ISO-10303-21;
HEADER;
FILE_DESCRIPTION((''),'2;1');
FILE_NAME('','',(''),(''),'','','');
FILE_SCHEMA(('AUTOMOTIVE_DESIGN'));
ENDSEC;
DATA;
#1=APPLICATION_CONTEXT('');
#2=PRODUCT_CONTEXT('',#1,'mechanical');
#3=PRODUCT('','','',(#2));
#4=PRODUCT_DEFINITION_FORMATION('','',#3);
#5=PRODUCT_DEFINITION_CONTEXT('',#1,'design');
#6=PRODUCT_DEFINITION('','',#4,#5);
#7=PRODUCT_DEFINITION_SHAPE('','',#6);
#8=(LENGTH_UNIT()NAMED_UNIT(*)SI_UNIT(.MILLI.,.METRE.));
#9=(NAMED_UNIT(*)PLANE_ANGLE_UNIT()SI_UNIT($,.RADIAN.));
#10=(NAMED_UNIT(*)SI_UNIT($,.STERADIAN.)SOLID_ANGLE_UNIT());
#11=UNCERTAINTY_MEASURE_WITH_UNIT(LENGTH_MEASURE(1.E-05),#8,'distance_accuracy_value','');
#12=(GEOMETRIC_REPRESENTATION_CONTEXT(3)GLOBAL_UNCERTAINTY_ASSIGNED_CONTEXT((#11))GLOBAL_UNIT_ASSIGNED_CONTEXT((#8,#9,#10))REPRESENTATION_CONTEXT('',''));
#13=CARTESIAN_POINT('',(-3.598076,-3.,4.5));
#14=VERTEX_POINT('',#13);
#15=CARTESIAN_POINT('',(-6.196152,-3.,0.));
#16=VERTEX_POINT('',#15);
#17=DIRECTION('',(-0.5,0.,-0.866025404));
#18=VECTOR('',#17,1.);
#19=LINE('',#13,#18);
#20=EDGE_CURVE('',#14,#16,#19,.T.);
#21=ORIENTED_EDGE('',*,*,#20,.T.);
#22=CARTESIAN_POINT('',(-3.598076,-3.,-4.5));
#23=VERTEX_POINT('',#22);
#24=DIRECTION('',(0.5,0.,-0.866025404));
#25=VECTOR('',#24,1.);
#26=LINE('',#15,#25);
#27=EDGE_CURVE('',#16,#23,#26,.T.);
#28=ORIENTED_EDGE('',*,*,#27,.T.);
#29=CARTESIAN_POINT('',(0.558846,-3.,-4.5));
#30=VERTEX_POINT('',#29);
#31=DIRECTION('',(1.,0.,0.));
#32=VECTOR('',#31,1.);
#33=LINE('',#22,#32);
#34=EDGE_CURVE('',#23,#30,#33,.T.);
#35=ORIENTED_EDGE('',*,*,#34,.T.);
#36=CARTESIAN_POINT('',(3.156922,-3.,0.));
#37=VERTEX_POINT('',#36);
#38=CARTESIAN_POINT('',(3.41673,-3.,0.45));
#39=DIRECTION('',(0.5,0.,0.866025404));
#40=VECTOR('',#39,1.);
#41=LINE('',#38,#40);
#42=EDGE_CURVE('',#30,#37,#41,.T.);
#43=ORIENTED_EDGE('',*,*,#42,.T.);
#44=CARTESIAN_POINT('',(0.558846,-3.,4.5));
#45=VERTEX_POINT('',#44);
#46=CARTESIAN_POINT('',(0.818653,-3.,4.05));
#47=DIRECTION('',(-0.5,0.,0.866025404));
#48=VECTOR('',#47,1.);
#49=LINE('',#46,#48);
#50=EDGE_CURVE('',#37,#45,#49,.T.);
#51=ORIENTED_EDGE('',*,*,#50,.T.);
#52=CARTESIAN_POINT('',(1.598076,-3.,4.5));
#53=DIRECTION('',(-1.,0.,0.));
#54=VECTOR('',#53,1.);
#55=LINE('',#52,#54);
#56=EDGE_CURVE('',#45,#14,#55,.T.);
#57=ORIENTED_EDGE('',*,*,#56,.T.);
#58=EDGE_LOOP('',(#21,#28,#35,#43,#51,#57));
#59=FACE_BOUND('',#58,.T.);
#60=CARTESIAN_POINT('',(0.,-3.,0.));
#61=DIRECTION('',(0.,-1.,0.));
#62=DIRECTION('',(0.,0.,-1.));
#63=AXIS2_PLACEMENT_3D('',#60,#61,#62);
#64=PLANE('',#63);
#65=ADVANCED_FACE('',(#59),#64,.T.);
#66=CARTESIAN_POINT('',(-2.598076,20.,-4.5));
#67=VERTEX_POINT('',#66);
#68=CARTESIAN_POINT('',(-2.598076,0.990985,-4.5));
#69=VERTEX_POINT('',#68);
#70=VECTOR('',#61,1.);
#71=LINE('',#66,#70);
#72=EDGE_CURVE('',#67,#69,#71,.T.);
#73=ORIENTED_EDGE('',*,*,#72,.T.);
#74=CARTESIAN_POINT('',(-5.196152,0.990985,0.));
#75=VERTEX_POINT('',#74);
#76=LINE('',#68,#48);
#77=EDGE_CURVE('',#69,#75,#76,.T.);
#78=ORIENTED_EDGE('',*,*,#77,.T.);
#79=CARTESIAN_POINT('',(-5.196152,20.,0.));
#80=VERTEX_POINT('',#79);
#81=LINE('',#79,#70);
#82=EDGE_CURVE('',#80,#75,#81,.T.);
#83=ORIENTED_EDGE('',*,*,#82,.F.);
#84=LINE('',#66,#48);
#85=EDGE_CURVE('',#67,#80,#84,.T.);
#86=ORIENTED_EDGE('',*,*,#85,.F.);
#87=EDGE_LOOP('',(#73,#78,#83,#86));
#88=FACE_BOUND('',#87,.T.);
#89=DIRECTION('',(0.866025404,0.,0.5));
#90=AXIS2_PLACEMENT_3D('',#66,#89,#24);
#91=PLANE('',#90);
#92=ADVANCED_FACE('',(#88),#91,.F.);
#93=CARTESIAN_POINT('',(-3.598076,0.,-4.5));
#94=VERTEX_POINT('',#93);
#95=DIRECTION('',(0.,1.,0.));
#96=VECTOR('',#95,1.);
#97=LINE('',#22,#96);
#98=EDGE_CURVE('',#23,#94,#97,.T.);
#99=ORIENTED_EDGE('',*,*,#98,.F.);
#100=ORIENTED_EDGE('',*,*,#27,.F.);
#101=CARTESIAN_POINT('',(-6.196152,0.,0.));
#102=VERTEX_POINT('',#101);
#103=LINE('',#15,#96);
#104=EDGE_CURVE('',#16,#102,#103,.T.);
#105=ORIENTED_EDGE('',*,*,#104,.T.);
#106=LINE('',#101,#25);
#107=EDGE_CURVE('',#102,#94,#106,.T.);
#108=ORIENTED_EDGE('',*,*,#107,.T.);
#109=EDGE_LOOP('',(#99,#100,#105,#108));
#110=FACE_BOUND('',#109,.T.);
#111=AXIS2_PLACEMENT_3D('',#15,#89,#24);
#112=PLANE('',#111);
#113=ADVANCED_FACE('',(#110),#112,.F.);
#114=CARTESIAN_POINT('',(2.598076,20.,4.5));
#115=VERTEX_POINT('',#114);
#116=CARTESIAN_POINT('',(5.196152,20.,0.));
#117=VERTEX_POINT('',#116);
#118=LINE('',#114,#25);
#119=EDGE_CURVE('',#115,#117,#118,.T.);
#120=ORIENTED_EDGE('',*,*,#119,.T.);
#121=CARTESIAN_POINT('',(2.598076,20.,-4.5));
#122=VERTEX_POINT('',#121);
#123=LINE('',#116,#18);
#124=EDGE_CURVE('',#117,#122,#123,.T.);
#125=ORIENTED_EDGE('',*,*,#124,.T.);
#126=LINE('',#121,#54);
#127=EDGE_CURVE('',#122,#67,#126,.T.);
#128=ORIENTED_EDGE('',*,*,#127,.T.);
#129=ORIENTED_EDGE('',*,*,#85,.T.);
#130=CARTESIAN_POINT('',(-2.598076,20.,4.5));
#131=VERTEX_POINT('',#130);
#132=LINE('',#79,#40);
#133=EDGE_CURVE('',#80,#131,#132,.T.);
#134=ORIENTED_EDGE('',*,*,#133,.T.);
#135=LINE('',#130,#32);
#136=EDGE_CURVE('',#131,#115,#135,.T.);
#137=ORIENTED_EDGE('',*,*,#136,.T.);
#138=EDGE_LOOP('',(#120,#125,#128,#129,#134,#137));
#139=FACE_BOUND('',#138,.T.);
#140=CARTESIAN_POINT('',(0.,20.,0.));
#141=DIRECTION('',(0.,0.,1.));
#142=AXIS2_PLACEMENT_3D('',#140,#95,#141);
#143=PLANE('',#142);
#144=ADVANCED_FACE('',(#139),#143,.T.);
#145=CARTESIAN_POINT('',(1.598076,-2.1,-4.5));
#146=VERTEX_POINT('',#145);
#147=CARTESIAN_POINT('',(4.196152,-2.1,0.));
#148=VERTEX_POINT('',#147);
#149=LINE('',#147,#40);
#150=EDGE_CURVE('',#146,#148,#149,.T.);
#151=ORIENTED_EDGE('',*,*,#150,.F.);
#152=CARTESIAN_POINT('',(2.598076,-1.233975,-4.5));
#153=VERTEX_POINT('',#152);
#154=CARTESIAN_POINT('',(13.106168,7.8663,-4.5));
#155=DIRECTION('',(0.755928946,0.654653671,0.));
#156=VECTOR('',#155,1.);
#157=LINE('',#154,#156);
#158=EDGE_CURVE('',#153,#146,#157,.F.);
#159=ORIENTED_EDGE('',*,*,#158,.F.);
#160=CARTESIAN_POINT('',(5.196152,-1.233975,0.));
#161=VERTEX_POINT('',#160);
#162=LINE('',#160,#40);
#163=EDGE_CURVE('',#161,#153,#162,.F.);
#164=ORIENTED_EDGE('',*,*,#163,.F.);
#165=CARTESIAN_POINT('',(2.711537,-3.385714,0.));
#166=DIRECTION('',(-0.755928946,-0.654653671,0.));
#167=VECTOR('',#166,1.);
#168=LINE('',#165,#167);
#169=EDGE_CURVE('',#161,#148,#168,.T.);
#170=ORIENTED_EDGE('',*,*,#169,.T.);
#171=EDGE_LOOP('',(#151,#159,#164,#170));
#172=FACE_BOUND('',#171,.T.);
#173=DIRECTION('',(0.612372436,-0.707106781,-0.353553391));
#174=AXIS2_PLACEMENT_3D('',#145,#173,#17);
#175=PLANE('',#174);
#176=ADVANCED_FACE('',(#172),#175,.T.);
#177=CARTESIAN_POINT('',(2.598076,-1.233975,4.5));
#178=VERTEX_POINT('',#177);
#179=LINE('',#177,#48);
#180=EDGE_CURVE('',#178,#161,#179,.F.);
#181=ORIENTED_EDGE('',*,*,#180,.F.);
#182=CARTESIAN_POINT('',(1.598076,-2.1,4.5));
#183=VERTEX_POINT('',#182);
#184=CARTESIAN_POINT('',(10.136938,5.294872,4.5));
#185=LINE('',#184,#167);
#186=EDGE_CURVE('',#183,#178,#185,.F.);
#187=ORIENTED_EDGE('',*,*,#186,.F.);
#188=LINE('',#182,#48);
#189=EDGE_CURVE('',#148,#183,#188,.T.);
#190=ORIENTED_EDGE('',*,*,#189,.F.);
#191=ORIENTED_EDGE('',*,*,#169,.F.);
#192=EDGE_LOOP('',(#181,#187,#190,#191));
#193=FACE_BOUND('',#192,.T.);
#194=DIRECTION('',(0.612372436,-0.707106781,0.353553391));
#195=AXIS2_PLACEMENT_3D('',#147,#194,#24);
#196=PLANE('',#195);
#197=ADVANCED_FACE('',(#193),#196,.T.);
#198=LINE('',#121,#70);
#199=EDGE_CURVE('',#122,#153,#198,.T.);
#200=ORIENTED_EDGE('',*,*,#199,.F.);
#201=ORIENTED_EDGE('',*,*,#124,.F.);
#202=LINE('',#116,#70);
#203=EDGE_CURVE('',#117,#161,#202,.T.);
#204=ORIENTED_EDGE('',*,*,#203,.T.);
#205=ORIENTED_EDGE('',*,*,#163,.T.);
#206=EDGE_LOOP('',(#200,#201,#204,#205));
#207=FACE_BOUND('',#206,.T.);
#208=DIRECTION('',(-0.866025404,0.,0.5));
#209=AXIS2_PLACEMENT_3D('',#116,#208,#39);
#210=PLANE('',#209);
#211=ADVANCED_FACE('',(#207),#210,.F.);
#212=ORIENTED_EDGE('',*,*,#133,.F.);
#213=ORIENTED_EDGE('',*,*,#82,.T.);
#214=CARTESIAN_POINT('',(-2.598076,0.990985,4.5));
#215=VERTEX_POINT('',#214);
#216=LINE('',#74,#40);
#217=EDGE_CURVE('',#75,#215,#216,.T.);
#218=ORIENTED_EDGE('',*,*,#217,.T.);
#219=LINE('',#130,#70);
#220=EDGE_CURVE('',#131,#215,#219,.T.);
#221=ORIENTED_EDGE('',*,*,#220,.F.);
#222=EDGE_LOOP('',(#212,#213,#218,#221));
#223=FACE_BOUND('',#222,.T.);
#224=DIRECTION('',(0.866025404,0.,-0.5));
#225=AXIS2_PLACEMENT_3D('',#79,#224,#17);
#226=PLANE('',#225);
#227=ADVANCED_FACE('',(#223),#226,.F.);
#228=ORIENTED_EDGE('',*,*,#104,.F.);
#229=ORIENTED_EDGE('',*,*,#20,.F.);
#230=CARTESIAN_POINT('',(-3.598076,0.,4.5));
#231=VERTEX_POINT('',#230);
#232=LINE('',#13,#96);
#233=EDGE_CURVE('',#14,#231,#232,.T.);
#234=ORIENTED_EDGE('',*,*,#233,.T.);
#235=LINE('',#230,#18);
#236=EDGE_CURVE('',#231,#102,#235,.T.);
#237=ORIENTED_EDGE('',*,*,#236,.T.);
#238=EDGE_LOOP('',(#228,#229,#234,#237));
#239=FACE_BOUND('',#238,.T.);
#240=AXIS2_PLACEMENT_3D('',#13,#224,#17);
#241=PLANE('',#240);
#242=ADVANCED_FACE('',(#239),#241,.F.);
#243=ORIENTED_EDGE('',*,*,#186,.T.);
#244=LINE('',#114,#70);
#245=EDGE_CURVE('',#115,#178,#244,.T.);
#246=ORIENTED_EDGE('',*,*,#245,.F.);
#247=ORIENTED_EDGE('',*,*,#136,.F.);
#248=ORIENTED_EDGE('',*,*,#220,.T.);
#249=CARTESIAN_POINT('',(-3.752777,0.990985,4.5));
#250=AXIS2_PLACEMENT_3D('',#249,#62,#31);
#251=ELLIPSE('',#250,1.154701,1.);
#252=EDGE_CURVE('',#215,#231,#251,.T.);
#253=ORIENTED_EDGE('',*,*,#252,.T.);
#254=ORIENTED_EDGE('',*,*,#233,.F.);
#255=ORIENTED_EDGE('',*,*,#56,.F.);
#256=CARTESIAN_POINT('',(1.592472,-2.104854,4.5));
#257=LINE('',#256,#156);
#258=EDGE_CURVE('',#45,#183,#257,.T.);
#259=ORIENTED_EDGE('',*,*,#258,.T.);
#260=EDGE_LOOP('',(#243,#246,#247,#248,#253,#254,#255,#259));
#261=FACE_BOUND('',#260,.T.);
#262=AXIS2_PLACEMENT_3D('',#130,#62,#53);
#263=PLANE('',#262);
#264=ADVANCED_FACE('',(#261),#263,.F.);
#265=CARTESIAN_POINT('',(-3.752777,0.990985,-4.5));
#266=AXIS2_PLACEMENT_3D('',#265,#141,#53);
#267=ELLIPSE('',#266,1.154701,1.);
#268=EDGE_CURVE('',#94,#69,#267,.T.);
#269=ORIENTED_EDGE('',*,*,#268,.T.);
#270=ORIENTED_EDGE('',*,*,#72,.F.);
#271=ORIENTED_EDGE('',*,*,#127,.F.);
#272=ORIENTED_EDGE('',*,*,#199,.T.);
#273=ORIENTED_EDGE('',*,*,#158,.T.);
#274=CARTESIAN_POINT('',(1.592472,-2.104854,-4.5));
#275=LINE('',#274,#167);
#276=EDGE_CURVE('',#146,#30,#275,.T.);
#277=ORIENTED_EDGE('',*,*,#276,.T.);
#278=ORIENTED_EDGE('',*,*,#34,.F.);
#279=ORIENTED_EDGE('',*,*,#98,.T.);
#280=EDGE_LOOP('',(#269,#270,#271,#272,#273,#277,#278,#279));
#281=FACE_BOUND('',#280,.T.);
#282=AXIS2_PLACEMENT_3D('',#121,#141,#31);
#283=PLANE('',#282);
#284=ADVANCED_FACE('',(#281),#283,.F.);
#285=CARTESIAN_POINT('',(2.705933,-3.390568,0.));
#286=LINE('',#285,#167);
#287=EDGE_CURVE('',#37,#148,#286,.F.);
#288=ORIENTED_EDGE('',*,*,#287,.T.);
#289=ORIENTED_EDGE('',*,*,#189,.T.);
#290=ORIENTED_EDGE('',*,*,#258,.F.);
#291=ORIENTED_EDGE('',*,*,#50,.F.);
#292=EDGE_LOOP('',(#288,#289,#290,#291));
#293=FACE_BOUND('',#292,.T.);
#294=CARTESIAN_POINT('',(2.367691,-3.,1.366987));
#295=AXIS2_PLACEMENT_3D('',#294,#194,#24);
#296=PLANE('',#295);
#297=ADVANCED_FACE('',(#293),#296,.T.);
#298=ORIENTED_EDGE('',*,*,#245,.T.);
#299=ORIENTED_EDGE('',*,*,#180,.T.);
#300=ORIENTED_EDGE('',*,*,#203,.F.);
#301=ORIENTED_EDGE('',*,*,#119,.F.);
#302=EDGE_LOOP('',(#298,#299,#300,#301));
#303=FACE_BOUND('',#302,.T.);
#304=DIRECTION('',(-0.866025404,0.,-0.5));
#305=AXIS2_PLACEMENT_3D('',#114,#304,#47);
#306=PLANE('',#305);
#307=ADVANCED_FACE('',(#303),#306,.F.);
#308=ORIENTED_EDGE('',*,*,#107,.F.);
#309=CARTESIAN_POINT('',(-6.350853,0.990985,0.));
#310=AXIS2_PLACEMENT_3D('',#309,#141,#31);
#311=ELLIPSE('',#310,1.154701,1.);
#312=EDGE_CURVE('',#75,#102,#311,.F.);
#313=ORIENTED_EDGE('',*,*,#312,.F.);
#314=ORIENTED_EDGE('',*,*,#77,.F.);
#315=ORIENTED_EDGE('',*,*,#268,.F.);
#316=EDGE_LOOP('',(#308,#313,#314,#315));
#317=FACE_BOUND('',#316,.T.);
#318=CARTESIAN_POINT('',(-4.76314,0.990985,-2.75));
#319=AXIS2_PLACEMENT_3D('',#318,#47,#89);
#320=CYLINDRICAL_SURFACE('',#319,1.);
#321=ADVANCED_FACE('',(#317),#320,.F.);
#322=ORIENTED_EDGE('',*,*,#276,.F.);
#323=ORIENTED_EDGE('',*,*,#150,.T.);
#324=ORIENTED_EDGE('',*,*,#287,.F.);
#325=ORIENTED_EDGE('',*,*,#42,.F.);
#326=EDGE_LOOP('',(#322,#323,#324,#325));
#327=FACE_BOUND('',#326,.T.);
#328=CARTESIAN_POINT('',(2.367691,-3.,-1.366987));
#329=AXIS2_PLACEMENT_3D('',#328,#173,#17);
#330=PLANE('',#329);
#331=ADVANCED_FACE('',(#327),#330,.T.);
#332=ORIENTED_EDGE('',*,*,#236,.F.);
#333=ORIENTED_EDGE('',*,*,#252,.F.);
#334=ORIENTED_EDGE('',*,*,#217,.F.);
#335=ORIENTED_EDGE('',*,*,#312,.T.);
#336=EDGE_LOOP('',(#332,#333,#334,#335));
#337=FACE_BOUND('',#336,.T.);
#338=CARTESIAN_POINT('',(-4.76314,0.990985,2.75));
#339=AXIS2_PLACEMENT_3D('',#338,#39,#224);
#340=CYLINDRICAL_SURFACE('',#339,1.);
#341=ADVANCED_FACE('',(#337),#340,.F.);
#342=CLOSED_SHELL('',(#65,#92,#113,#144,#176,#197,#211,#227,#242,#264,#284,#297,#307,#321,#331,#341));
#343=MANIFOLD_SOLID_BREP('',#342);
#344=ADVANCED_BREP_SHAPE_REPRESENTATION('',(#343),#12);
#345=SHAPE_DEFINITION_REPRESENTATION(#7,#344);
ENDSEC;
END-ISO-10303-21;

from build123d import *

# Parameters (mm, degrees)
EXTRUDE_1_DEPTH = 20
EXTRUDE_2_DEPTH = 3
CHAMFER_1_SIZE  = 2.1
CHAMFER_2_SIZE  = 0.9
FILLET_2_R      = 1


# Some blends are built 0.0001 mm under size
with BuildPart() as part:
    # 草图1 → 凸台-拉伸1 (new body)
    with BuildSketch(Plane(origin=(0, 0, 0), x_dir=(1, 0, 0), z_dir=(0, 1, 0))):
        Polygon((2.598076211, -4.5), (5.196152423, 0), (2.598076211, 4.5), (-2.598076211, 4.5), (-5.196152423, 0), (-2.598076211, -4.5), align=None)
    extrude(amount=EXTRUDE_1_DEPTH)

    # 草图2 → 凸台-拉伸2 (add)
    with BuildSketch(Plane(origin=(0, 0, 0), x_dir=(-1, 0, 0), z_dir=(0, -1, 0))):
        Polygon((6.196152423, 0), (3.598076211, 4.5), (-1.598076211, 4.5), (-4.196152423, 0), (-1.598076211, -4.5), (3.598076211, -4.5), align=None)
    extrude(amount=EXTRUDE_2_DEPTH)

    # 倒角1
    # the kernel refuses this chamfer: 2.1 mm, written as the material it adds along each edge
    with BuildSketch(Plane(origin=(-1.102190926, 0, -9.176999876), x_dir=(0.8656979742248804, 0.027495876610586372, -0.49981095845564816), z_dir=(0.49999999999999983, 0, 0.8660254037844388))) as chamfer_1_piece_1_section:
        Polygon((CHAMFER_1_SIZE * 0.999621916911, -CHAMFER_1_SIZE * 0.0274958766106), (-CHAMFER_1_SIZE * 0.0274958766106, -CHAMFER_1_SIZE * 0.999621916911), (0, 0), align=None)
    chamfer_1_piece_1 = extrude(amount=15.997220972, mode=Mode.PRIVATE)
    chamfer_1_piece_1 = split(chamfer_1_piece_1, bisect_by=Plane(origin=(3.647114317, -0.87342855, -2.683012702), z_dir=(-0.8660254037844421, 0, 0.49999999999999406)), keep=Keep.TOP, mode=Mode.PRIVATE)
    chamfer_1_piece_1 = split(chamfer_1_piece_1, bisect_by=Plane(origin=(3.19992905, -0.87342855, -4.5), z_dir=(0, 0, 1)), keep=Keep.TOP, mode=Mode.PRIVATE)
    chamfer_1_piece_1 = split(chamfer_1_piece_1, bisect_by=Plane(origin=(4.997078842, -0.87342855, -1.387245251), z_dir=(-0.8660254037844387, 0, -0.5000000000000003)), keep=Keep.TOP, mode=Mode.PRIVATE)
    add(chamfer_1_piece_1)
    with BuildSketch(Plane(origin=(6.89641956, 0, -4.676999876), x_dir=(0.8656979742248802, 0.027495876610586358, 0.49981095845564866), z_dir=(-0.5000000000000003, 0, 0.8660254037844386))) as chamfer_1_piece_2_section:
        Polygon((CHAMFER_1_SIZE * 0.999621916911, -CHAMFER_1_SIZE * 0.0274958766106), (-CHAMFER_1_SIZE * 0.0274958766106, -CHAMFER_1_SIZE * 0.999621916911), (0, 0), align=None)
    chamfer_1_piece_2 = extrude(amount=15.997220972, mode=Mode.PRIVATE)
    chamfer_1_piece_2 = split(chamfer_1_piece_2, bisect_by=Plane(origin=(3.647114317, -0.87342855, 2.683012702), z_dir=(-0.8660254037844353, 0, -0.500000000000006)), keep=Keep.TOP, mode=Mode.PRIVATE)
    chamfer_1_piece_2 = split(chamfer_1_piece_2, bisect_by=Plane(origin=(3.19992905, -0.87342855, 4.5), z_dir=(0, 0, -1)), keep=Keep.TOP, mode=Mode.PRIVATE)
    chamfer_1_piece_2 = split(chamfer_1_piece_2, bisect_by=Plane(origin=(4.997078842, -0.87342855, 1.387245251), z_dir=(-0.8660254037844388, 0, 0.49999999999999983)), keep=Keep.TOP, mode=Mode.PRIVATE)
    add(chamfer_1_piece_2)
    with BuildSketch(Plane(origin=(6.89641956, 0, -4.676999876), x_dir=(0.8656979742248802, 0.027495876610586358, 0.49981095845564866), z_dir=(-0.5000000000000003, 0, 0.8660254037844386))) as chamfer_1_piece_3a_section:
        Polygon((CHAMFER_1_SIZE * 0.999621916911, -CHAMFER_1_SIZE * 0.0274958766106), (-CHAMFER_1_SIZE * 0.0274958766106, -CHAMFER_1_SIZE * 0.999621916911), (0, 0), align=None)
    chamfer_1_piece_3a = extrude(amount=15.997220972, mode=Mode.PRIVATE)
    chamfer_1_piece_3a = split(chamfer_1_piece_3a, bisect_by=Plane(origin=(5.090413844, -0.863604647, 0.183144591), z_dir=(-0.8660254037844353, 0, -0.500000000000006)), keep=Keep.TOP, mode=Mode.PRIVATE)
    chamfer_1_piece_3a = split(chamfer_1_piece_3a, bisect_by=Plane(origin=(5.032629581, -0.863604647, -0.28322987), z_dir=(-0.8660254037844421, 0, 0.49999999999999406)), keep=Keep.TOP, mode=Mode.PRIVATE)
    chamfer_1_piece_3a = split(chamfer_1_piece_3a, bisect_by=Plane(origin=(4.282629581, -0.863604647, 0.149782832), z_dir=(0.8660254037844388, 0, -0.49999999999999983)), keep=Keep.TOP, mode=Mode.PRIVATE)
    with BuildSketch(Plane(origin=(-1.102190926, 0, -9.176999876), x_dir=(0.8656979742248804, 0.027495876610586372, -0.49981095845564816), z_dir=(0.49999999999999983, 0, 0.8660254037844388))) as chamfer_1_piece_3b_section:
        Polygon((CHAMFER_1_SIZE * 0.999621916911, -CHAMFER_1_SIZE * 0.0274958766106), (-CHAMFER_1_SIZE * 0.0274958766106, -CHAMFER_1_SIZE * 0.999621916911), (0, 0), align=None)
    chamfer_1_piece_3b = extrude(amount=15.997220972, mode=Mode.PRIVATE)
    chamfer_1_piece_3b = split(chamfer_1_piece_3b, bisect_by=Plane(origin=(5.032629581, -0.863604647, 0.28322987), z_dir=(-0.8660254037844353, 0, -0.500000000000006)), keep=Keep.TOP, mode=Mode.PRIVATE)
    chamfer_1_piece_3b = split(chamfer_1_piece_3b, bisect_by=Plane(origin=(5.090413844, -0.863604647, -0.183144591), z_dir=(-0.8660254037844421, 0, 0.49999999999999406)), keep=Keep.TOP, mode=Mode.PRIVATE)
    chamfer_1_piece_3b = split(chamfer_1_piece_3b, bisect_by=Plane(origin=(4.282629581, -0.863604647, -0.149782832), z_dir=(0.8660254037844387, 0, 0.5000000000000003)), keep=Keep.TOP, mode=Mode.PRIVATE)
    chamfer_1_piece_3 = chamfer_1_piece_3a & chamfer_1_piece_3b
    add(chamfer_1_piece_3)

    # 倒角2
    chamfer_2_edges = [part.edges().sort_by_distance(p)[0] for p in [
        (2.897114317, -3, 2.25),
        (2.897114317, -3, -2.25),
    ]]
    chamfer(chamfer_2_edges, length=CHAMFER_2_SIZE - 0.0001)  # a hair under: the kernel refuses the full size

    # 圆角2
    # the kernel refuses this fillet: 1 mm, written as the material it adds along each edge
    with BuildSketch(Plane(origin=(-1.359345253, 0, -6.645544957), x_dir=(-0.8660254037844353, 5.384295521873835e-15, -0.500000000000006), z_dir=(-0.500000000000006, 0, 0.8660254037844353))) as fillet_2_piece_1_section:
        with BuildLine():
            CenterArc((1, -0.990984767), FILLET_2_R, 97.699329946, 82.300670054)
            Line((0, -0.990984767), (-0.02, -0.990984767))
            Line((-0.02, -0.990984767), (-0.02, 0))
            Line((-0.02, 0), (0, 0.02))
            ThreePointArc((0, 0.02), (0.433012702, 0.02), (0.863345912, 0.019819695))
            Line((0.863345912, 0.019819695), (0.866025404, 0))
        make_face()
    fillet_2_piece_1 = extrude(amount=10.151076256, mode=Mode.PRIVATE)
    fillet_2_piece_1 = split(fillet_2_piece_1, bisect_by=Plane(origin=(-4.072160792, 0.234330223, -4.5), z_dir=(0, 0, 1)), keep=Keep.TOP, mode=Mode.PRIVATE)
    fillet_2_piece_1 = split(fillet_2_piece_1, bisect_by=Plane(origin=(-5.933194713, 0.234330223, -1.276594694), z_dir=(0.8660254037844423, 0, -0.49999999999999395)), keep=Keep.TOP, mode=Mode.PRIVATE)
    add(fillet_2_piece_1)
    with BuildSketch(Plane(origin=(-6.434883381, 0, -2.145544957), x_dir=(-0.8660254037844421, 5.3842955218737e-15, 0.4999999999999939), z_dir=(0.49999999999999395, 0, 0.8660254037844423))) as fillet_2_piece_2_section:
        with BuildLine():
            CenterArc((1, -0.990984767), FILLET_2_R, 97.699329946, 82.300670054)
            Line((0, -0.990984767), (-0.02, -0.990984767))
            Line((-0.02, -0.990984767), (-0.02, 0))
            Line((-0.02, 0), (0, 0.02))
            ThreePointArc((0, 0.02), (0.433012702, 0.02), (0.863345912, 0.019819695))
            Line((0.863345912, 0.019819695), (0.866025404, 0))
        make_face()
    fillet_2_piece_2 = extrude(amount=10.151076256, mode=Mode.PRIVATE)
    fillet_2_piece_2 = split(fillet_2_piece_2, bisect_by=Plane(origin=(-4.072160792, 0.234330223, 4.5), z_dir=(0, 0, -1)), keep=Keep.TOP, mode=Mode.PRIVATE)
    fillet_2_piece_2 = split(fillet_2_piece_2, bisect_by=Plane(origin=(-5.933194713, 0.234330223, 1.276594694), z_dir=(0.8660254037844353, 0, 0.500000000000006)), keep=Keep.TOP, mode=Mode.PRIVATE)
    add(fillet_2_piece_2)
    with BuildSketch(Plane(origin=(-6.434883381, 0, -2.145544957), x_dir=(-0.8660254037844421, 5.3842955218737e-15, 0.4999999999999939), z_dir=(0.49999999999999395, 0, 0.8660254037844423))) as fillet_2_piece_3a_section:
        with BuildLine():
            CenterArc((1, -0.990984767), FILLET_2_R, 97.699329946, 82.300670054)
            Line((0, -0.990984767), (-0.02, -0.990984767))
            Line((-0.02, -0.990984767), (-0.02, 0))
            Line((-0.02, 0), (0, 0.02))
            ThreePointArc((0, 0.02), (0.433012702, 0.02), (0.863345912, 0.019819695))
            Line((0.863345912, 0.019819695), (0.866025404, 0))
        make_face()
    fillet_2_piece_3a = extrude(amount=10.151076256, mode=Mode.PRIVATE)
    fillet_2_piece_3a = split(fillet_2_piece_3a, bisect_by=Plane(origin=(-5.943047398, 0.228517216, -0.438390763), z_dir=(0.8660254037844385, 0, 0.5000000000000004)), keep=Keep.TOP, mode=Mode.PRIVATE)
    fillet_2_piece_3a = split(fillet_2_piece_3a, bisect_by=Plane(origin=(-5.193047398, 0.228517216, -0.005378061), z_dir=(-0.8660254037844353, 0, -0.500000000000006)), keep=Keep.TOP, mode=Mode.PRIVATE)
    with BuildSketch(Plane(origin=(-1.359345253, 0, -6.645544957), x_dir=(-0.8660254037844353, 5.384295521873835e-15, -0.500000000000006), z_dir=(-0.500000000000006, 0, 0.8660254037844353))) as fillet_2_piece_3b_section:
        with BuildLine():
            CenterArc((1, -0.990984767), FILLET_2_R, 97.699329946, 82.300670054)
            Line((0, -0.990984767), (-0.02, -0.990984767))
            Line((-0.02, -0.990984767), (-0.02, 0))
            Line((-0.02, 0), (0, 0.02))
            ThreePointArc((0, 0.02), (0.433012702, 0.02), (0.863345912, 0.019819695))
            Line((0.863345912, 0.019819695), (0.866025404, 0))
        make_face()
    fillet_2_piece_3b = extrude(amount=10.151076256, mode=Mode.PRIVATE)
    fillet_2_piece_3b = split(fillet_2_piece_3b, bisect_by=Plane(origin=(-5.943047398, 0.228517216, 0.438390763), z_dir=(0.8660254037844388, 0, -0.49999999999999967)), keep=Keep.TOP, mode=Mode.PRIVATE)
    fillet_2_piece_3b = split(fillet_2_piece_3b, bisect_by=Plane(origin=(-5.193047398, 0.228517216, 0.005378061), z_dir=(-0.8660254037844423, 0, 0.49999999999999395)), keep=Keep.TOP, mode=Mode.PRIVATE)
    fillet_2_piece_3 = fillet_2_piece_3a & fillet_2_piece_3b
    add(fillet_2_piece_3)


solid = part.part
